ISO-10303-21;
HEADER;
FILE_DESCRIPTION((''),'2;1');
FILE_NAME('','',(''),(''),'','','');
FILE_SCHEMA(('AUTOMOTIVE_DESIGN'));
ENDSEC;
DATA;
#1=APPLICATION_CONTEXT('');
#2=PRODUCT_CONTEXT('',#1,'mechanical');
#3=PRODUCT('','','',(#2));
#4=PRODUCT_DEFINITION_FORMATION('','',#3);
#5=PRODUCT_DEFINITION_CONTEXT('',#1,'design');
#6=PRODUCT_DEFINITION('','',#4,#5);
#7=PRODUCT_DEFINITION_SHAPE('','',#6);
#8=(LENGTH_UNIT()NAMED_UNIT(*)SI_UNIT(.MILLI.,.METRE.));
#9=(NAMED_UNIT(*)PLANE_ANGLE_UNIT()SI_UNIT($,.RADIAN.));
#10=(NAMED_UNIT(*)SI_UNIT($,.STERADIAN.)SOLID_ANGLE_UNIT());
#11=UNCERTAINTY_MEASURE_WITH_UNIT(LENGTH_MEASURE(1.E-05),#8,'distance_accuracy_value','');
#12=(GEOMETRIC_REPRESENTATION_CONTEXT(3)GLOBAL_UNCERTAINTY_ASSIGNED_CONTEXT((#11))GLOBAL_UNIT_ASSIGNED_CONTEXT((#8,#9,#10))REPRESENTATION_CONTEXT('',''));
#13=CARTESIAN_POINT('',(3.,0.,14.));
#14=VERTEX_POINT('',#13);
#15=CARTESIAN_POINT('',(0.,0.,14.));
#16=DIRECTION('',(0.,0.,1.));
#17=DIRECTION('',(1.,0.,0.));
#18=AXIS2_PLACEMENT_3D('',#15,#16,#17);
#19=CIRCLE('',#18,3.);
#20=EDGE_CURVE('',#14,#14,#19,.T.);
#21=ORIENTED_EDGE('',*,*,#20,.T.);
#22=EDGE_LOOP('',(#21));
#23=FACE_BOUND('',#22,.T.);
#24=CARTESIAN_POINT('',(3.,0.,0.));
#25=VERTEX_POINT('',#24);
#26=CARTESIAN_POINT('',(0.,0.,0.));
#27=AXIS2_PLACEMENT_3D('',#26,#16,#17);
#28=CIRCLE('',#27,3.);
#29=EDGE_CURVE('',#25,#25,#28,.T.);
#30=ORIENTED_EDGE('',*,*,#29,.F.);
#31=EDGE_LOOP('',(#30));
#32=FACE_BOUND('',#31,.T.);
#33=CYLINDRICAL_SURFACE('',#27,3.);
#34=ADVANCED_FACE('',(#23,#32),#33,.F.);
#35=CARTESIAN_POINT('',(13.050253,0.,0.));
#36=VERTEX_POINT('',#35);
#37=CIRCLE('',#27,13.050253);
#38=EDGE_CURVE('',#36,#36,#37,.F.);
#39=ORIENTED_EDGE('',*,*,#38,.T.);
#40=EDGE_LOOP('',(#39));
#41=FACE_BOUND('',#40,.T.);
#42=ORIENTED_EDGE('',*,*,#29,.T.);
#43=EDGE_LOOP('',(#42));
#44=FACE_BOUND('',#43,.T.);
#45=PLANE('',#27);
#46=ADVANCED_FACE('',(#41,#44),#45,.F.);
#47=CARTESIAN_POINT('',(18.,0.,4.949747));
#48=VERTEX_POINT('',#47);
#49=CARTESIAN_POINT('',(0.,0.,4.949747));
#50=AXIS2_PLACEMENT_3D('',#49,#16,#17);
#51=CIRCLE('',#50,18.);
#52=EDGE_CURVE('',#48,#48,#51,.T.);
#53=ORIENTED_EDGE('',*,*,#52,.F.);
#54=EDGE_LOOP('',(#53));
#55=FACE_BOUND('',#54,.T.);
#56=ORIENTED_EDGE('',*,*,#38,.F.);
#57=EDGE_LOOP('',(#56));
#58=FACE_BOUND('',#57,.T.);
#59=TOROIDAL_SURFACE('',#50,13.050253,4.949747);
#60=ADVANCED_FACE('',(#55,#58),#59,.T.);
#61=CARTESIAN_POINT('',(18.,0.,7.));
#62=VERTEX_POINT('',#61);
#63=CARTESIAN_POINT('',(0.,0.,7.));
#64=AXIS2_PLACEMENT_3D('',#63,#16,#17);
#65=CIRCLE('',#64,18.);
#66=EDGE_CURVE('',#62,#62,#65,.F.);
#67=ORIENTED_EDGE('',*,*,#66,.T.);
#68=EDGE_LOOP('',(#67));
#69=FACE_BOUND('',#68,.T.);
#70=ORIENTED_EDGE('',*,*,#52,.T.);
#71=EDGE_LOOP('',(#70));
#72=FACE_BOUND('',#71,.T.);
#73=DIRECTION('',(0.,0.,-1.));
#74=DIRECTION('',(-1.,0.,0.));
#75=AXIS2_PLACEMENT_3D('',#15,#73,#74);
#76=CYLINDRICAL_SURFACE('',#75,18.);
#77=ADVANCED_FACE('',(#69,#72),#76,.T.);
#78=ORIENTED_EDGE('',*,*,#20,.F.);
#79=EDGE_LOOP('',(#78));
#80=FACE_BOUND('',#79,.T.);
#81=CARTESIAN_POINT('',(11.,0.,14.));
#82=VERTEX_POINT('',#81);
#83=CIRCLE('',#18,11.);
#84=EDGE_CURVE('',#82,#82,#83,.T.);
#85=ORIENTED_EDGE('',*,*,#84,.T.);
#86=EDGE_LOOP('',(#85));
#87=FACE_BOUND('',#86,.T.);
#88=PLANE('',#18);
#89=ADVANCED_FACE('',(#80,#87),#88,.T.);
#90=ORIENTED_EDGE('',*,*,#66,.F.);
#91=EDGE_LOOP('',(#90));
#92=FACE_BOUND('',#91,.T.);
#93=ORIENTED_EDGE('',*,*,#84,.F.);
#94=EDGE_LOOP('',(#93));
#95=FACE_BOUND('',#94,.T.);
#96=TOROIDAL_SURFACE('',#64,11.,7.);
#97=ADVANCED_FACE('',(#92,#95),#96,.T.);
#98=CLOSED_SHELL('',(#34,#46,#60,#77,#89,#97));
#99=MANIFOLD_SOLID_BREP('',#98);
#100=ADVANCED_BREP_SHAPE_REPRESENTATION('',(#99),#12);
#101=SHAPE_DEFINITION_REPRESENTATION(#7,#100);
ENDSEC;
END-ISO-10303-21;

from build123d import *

# Parameters (mm, degrees)
ESBO_O1_R                = 18
RESSALTO_EXTRUS_O2_DEPTH = 14
FILETE6_R                = 7
ESBO_O3_R                = 3
CORTE_EXTRUS_O1_DEPTH    = 14


with BuildPart() as part:
    # Esboço1 → Ressalto-extrusão2 (new body)
    with BuildSketch(Plane.XY):
        Circle(ESBO_O1_R)
    extrude(amount=RESSALTO_EXTRUS_O2_DEPTH)

    # Filete6
    filete6_edges = [part.edges().sort_by_distance(p)[0] for p in [
        (-18, 0, 14),
    ]]
    fillet(filete6_edges, radius=FILETE6_R)

    # Filete7: read off the stored shape, not the designer's step
    # Filete7 outline → Filete7 (revolve, cut)
    with BuildSketch(Plane.XZ):
        with BuildLine():
            ThreePointArc((18, 4.949747468), (16.550252532, 1.449747468), (13.050252532, 0))
            Line((13.050252532, 0), (18, 0))
            Line((18, 0), (18, 4.949747468))
        make_face()
    revolve(axis=Axis((0, 0, 0), (0, 0, 1)), mode=Mode.SUBTRACT)

    # Esboço3 → Corte-extrusão1 (cut)
    with BuildSketch(Plane.XY.offset(14)):
        Circle(ESBO_O3_R)
    extrude(amount=-CORTE_EXTRUS_O1_DEPTH, mode=Mode.SUBTRACT)


solid = part.part
